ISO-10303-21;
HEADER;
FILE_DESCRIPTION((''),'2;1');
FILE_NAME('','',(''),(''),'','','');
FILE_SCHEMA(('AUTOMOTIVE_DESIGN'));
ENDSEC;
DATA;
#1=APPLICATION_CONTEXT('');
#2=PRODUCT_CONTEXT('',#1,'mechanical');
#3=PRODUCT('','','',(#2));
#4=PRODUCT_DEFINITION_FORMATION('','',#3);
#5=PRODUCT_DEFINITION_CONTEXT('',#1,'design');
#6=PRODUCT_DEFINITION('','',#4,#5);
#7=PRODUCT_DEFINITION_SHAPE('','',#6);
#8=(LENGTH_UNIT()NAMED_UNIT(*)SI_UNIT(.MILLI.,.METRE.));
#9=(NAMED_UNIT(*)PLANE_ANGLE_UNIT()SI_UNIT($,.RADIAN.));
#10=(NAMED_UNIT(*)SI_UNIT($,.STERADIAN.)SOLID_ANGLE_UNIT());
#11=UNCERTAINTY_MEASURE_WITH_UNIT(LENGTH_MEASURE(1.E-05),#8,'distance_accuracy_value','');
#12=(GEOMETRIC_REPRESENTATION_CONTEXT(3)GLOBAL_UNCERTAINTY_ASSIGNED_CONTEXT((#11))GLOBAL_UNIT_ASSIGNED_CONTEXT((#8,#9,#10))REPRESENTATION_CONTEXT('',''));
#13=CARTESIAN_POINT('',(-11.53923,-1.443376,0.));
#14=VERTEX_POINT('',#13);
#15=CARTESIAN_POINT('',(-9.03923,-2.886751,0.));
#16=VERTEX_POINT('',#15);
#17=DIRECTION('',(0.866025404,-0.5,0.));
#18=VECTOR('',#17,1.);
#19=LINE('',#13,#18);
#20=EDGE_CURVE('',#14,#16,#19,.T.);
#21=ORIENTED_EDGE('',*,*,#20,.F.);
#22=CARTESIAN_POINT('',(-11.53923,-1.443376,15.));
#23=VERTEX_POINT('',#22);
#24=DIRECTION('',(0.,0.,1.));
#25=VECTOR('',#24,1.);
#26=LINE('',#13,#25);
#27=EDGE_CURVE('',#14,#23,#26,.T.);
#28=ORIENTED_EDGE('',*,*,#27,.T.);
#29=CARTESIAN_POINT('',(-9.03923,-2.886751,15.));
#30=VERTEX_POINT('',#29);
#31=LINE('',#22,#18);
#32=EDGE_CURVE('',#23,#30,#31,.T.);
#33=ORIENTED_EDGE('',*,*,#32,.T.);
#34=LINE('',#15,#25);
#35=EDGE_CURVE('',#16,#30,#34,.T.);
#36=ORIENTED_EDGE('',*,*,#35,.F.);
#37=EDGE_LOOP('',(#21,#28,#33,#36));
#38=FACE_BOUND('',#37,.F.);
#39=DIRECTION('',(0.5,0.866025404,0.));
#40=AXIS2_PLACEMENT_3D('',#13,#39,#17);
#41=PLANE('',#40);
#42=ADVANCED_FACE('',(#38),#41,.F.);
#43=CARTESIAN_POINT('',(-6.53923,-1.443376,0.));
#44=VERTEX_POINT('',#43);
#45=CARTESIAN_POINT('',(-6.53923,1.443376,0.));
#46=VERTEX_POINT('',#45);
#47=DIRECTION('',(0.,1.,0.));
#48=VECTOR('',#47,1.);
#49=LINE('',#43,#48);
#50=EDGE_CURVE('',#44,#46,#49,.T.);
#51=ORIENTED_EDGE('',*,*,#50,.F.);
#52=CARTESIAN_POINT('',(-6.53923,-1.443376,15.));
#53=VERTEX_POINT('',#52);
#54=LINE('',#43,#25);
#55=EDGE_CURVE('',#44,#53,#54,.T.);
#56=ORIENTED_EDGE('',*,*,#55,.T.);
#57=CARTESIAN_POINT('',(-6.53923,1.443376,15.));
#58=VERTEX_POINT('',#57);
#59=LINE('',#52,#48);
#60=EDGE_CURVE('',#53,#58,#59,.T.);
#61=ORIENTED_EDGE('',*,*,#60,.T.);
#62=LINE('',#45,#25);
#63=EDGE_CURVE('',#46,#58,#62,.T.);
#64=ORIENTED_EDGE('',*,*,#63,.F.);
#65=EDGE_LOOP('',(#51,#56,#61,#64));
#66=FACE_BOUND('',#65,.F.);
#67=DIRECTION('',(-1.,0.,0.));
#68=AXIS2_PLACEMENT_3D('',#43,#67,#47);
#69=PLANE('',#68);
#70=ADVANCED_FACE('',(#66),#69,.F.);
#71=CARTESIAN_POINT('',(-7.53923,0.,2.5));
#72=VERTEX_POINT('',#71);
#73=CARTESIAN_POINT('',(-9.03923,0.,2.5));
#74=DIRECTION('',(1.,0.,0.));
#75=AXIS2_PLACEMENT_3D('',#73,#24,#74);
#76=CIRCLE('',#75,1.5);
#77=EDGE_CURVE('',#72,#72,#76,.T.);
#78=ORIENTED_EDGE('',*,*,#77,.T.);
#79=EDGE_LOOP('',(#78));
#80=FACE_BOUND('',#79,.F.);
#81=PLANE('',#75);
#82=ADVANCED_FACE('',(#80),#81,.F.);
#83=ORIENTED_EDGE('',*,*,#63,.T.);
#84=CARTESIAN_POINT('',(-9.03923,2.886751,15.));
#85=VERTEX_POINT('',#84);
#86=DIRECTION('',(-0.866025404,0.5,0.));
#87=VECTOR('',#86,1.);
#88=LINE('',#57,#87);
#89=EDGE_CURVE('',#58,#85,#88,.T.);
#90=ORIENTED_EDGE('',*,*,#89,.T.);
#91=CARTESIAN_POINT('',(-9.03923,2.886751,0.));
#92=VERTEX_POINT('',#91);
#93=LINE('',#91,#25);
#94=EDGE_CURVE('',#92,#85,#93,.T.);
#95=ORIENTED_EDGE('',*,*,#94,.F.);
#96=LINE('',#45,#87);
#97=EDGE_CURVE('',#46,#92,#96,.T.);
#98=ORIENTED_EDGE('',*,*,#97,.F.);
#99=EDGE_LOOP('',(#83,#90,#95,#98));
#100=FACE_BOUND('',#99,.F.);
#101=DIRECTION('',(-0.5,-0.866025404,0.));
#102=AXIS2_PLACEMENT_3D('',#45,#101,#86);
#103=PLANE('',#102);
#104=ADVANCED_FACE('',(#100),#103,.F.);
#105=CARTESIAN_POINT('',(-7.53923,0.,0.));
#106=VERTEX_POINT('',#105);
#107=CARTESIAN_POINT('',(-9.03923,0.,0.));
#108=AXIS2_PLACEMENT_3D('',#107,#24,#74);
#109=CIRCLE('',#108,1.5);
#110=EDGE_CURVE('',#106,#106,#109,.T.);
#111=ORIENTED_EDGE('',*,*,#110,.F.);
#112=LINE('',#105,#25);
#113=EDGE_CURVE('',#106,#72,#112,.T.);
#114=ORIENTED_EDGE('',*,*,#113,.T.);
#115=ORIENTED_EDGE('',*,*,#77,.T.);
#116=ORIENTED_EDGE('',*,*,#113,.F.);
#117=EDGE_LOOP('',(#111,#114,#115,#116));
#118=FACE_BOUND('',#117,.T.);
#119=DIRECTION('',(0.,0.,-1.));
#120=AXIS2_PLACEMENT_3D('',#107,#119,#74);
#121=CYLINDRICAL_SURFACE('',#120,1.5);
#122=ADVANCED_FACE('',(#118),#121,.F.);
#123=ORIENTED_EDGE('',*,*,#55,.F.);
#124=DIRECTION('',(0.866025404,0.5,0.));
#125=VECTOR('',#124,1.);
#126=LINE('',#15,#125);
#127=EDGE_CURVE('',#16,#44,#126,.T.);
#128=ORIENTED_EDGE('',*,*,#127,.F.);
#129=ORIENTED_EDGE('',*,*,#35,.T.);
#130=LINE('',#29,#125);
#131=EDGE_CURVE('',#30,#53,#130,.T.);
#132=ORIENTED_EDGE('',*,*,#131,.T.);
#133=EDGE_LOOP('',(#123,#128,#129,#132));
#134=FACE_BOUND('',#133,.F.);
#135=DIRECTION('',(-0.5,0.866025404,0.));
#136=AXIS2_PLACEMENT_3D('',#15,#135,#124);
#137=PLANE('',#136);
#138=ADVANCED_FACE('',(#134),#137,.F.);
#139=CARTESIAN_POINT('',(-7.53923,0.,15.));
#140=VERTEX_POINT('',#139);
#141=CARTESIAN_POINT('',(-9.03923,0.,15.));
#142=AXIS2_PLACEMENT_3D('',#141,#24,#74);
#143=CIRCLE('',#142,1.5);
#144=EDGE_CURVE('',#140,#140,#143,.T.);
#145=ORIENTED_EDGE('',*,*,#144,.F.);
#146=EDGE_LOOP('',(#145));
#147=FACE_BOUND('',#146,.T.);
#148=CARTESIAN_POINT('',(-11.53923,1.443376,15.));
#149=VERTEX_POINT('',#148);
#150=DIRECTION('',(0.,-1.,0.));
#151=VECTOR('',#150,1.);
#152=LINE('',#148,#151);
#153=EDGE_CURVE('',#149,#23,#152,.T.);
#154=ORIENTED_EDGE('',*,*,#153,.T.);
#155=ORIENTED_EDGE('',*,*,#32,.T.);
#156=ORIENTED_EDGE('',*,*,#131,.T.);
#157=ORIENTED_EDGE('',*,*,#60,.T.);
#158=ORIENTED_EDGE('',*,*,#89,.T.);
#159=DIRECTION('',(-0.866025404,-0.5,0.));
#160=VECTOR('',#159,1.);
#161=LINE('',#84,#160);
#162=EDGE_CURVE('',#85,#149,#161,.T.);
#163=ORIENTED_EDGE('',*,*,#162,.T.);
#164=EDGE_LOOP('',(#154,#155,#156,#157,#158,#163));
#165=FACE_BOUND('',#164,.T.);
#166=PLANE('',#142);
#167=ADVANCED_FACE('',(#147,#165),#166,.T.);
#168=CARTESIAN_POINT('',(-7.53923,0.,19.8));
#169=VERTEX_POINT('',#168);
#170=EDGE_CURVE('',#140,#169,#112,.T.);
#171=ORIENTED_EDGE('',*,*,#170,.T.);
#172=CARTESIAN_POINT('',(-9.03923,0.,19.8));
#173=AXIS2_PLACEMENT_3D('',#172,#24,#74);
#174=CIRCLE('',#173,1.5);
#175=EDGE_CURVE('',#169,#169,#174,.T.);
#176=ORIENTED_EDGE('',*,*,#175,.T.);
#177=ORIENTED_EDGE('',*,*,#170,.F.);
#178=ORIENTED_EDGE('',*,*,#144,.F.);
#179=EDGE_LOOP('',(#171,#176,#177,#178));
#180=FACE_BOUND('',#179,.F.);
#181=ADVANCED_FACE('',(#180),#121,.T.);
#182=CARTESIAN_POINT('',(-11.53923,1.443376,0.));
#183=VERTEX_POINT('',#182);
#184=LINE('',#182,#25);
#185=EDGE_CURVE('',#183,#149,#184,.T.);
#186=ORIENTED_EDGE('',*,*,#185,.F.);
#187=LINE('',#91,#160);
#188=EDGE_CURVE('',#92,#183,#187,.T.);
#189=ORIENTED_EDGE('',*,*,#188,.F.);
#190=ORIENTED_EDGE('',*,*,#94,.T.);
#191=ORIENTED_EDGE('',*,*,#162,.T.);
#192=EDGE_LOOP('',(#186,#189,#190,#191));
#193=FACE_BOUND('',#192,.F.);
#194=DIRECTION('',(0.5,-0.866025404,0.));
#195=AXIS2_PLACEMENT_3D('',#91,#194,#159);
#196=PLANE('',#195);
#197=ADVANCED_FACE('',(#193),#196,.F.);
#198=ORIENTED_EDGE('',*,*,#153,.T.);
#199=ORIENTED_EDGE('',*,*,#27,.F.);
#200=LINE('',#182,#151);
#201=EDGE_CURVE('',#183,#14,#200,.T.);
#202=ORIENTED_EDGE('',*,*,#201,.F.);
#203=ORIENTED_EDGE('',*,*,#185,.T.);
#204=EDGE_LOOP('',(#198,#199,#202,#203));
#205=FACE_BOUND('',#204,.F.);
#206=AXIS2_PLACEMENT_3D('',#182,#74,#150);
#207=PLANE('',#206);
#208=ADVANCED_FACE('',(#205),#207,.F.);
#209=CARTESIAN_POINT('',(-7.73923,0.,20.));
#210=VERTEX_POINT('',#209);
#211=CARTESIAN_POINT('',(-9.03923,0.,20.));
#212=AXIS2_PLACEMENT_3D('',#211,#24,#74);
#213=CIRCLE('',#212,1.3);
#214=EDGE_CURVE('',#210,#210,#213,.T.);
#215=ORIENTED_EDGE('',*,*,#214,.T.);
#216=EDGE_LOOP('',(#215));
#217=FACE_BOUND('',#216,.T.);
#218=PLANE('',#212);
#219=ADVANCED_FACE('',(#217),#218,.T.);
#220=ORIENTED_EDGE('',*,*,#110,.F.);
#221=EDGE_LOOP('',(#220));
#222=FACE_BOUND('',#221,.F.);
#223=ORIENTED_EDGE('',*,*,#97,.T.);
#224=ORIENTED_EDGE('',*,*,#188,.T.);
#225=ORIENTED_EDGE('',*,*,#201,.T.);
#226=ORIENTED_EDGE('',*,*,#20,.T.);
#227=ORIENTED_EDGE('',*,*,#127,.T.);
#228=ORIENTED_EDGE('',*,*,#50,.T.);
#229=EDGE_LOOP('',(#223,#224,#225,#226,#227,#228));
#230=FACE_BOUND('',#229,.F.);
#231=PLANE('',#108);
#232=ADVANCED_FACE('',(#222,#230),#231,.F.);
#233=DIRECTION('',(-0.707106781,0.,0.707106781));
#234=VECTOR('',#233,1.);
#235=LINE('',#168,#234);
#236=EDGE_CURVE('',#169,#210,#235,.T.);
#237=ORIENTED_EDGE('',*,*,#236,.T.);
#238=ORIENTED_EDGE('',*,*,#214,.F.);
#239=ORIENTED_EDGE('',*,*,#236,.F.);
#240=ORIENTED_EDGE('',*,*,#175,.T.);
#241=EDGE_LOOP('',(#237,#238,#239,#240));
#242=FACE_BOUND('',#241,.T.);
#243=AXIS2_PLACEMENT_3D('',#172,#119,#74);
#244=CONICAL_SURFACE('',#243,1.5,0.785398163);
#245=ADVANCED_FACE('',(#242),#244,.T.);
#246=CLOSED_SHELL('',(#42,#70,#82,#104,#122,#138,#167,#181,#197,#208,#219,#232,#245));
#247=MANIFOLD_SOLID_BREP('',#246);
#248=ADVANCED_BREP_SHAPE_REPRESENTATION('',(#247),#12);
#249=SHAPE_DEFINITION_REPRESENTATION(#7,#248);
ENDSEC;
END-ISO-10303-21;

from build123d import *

# Parameters (mm, degrees)
F0_R     = 1.5
F1_DEPTH = 15
F2_DEPTH = 20
F3_SIZE  = 0.2
F4_DEPTH = 2.5


# Not quite as in the source:
# - a feature names something its author has since deleted; it is built from what else it names


with BuildPart() as f1:
    # F0 (on Top) → F1 (new body)
    with BuildSketch(Plane.XY):
        Polygon((-6.5392298422, -1.443375673), (-6.5392298422, 1.443375673), (-9.0392298422, 2.8867513459), (-11.5392298422, 1.443375673), (-11.5392298422, -1.443375673), (-9.0392298422, -2.8867513459), align=None)
        with Locations((-9.0392298422, 0)):
            Circle(F0_R, mode=Mode.SUBTRACT)
    extrude(amount=F1_DEPTH)

    # F0 (on Top) → F2 (join)
    with BuildSketch(Plane.XY):
        with Locations((-9.0392298422, 0)):
            Circle(F0_R)
    extrude(amount=F2_DEPTH)

    # F3
    f3_edges = [f1.edges().sort_by_distance(p)[0] for p in [
        (-10.53923, 0, 20),
    ]]
    chamfer(f3_edges, length=F3_SIZE)

    # F0 (on Top) → F4 (cut)
    with BuildSketch(Plane.XY):
        with Locations((-9.0392298422, 0)):
            Circle(F0_R)
    extrude(amount=F4_DEPTH, mode=Mode.SUBTRACT)


solid = f1.part
